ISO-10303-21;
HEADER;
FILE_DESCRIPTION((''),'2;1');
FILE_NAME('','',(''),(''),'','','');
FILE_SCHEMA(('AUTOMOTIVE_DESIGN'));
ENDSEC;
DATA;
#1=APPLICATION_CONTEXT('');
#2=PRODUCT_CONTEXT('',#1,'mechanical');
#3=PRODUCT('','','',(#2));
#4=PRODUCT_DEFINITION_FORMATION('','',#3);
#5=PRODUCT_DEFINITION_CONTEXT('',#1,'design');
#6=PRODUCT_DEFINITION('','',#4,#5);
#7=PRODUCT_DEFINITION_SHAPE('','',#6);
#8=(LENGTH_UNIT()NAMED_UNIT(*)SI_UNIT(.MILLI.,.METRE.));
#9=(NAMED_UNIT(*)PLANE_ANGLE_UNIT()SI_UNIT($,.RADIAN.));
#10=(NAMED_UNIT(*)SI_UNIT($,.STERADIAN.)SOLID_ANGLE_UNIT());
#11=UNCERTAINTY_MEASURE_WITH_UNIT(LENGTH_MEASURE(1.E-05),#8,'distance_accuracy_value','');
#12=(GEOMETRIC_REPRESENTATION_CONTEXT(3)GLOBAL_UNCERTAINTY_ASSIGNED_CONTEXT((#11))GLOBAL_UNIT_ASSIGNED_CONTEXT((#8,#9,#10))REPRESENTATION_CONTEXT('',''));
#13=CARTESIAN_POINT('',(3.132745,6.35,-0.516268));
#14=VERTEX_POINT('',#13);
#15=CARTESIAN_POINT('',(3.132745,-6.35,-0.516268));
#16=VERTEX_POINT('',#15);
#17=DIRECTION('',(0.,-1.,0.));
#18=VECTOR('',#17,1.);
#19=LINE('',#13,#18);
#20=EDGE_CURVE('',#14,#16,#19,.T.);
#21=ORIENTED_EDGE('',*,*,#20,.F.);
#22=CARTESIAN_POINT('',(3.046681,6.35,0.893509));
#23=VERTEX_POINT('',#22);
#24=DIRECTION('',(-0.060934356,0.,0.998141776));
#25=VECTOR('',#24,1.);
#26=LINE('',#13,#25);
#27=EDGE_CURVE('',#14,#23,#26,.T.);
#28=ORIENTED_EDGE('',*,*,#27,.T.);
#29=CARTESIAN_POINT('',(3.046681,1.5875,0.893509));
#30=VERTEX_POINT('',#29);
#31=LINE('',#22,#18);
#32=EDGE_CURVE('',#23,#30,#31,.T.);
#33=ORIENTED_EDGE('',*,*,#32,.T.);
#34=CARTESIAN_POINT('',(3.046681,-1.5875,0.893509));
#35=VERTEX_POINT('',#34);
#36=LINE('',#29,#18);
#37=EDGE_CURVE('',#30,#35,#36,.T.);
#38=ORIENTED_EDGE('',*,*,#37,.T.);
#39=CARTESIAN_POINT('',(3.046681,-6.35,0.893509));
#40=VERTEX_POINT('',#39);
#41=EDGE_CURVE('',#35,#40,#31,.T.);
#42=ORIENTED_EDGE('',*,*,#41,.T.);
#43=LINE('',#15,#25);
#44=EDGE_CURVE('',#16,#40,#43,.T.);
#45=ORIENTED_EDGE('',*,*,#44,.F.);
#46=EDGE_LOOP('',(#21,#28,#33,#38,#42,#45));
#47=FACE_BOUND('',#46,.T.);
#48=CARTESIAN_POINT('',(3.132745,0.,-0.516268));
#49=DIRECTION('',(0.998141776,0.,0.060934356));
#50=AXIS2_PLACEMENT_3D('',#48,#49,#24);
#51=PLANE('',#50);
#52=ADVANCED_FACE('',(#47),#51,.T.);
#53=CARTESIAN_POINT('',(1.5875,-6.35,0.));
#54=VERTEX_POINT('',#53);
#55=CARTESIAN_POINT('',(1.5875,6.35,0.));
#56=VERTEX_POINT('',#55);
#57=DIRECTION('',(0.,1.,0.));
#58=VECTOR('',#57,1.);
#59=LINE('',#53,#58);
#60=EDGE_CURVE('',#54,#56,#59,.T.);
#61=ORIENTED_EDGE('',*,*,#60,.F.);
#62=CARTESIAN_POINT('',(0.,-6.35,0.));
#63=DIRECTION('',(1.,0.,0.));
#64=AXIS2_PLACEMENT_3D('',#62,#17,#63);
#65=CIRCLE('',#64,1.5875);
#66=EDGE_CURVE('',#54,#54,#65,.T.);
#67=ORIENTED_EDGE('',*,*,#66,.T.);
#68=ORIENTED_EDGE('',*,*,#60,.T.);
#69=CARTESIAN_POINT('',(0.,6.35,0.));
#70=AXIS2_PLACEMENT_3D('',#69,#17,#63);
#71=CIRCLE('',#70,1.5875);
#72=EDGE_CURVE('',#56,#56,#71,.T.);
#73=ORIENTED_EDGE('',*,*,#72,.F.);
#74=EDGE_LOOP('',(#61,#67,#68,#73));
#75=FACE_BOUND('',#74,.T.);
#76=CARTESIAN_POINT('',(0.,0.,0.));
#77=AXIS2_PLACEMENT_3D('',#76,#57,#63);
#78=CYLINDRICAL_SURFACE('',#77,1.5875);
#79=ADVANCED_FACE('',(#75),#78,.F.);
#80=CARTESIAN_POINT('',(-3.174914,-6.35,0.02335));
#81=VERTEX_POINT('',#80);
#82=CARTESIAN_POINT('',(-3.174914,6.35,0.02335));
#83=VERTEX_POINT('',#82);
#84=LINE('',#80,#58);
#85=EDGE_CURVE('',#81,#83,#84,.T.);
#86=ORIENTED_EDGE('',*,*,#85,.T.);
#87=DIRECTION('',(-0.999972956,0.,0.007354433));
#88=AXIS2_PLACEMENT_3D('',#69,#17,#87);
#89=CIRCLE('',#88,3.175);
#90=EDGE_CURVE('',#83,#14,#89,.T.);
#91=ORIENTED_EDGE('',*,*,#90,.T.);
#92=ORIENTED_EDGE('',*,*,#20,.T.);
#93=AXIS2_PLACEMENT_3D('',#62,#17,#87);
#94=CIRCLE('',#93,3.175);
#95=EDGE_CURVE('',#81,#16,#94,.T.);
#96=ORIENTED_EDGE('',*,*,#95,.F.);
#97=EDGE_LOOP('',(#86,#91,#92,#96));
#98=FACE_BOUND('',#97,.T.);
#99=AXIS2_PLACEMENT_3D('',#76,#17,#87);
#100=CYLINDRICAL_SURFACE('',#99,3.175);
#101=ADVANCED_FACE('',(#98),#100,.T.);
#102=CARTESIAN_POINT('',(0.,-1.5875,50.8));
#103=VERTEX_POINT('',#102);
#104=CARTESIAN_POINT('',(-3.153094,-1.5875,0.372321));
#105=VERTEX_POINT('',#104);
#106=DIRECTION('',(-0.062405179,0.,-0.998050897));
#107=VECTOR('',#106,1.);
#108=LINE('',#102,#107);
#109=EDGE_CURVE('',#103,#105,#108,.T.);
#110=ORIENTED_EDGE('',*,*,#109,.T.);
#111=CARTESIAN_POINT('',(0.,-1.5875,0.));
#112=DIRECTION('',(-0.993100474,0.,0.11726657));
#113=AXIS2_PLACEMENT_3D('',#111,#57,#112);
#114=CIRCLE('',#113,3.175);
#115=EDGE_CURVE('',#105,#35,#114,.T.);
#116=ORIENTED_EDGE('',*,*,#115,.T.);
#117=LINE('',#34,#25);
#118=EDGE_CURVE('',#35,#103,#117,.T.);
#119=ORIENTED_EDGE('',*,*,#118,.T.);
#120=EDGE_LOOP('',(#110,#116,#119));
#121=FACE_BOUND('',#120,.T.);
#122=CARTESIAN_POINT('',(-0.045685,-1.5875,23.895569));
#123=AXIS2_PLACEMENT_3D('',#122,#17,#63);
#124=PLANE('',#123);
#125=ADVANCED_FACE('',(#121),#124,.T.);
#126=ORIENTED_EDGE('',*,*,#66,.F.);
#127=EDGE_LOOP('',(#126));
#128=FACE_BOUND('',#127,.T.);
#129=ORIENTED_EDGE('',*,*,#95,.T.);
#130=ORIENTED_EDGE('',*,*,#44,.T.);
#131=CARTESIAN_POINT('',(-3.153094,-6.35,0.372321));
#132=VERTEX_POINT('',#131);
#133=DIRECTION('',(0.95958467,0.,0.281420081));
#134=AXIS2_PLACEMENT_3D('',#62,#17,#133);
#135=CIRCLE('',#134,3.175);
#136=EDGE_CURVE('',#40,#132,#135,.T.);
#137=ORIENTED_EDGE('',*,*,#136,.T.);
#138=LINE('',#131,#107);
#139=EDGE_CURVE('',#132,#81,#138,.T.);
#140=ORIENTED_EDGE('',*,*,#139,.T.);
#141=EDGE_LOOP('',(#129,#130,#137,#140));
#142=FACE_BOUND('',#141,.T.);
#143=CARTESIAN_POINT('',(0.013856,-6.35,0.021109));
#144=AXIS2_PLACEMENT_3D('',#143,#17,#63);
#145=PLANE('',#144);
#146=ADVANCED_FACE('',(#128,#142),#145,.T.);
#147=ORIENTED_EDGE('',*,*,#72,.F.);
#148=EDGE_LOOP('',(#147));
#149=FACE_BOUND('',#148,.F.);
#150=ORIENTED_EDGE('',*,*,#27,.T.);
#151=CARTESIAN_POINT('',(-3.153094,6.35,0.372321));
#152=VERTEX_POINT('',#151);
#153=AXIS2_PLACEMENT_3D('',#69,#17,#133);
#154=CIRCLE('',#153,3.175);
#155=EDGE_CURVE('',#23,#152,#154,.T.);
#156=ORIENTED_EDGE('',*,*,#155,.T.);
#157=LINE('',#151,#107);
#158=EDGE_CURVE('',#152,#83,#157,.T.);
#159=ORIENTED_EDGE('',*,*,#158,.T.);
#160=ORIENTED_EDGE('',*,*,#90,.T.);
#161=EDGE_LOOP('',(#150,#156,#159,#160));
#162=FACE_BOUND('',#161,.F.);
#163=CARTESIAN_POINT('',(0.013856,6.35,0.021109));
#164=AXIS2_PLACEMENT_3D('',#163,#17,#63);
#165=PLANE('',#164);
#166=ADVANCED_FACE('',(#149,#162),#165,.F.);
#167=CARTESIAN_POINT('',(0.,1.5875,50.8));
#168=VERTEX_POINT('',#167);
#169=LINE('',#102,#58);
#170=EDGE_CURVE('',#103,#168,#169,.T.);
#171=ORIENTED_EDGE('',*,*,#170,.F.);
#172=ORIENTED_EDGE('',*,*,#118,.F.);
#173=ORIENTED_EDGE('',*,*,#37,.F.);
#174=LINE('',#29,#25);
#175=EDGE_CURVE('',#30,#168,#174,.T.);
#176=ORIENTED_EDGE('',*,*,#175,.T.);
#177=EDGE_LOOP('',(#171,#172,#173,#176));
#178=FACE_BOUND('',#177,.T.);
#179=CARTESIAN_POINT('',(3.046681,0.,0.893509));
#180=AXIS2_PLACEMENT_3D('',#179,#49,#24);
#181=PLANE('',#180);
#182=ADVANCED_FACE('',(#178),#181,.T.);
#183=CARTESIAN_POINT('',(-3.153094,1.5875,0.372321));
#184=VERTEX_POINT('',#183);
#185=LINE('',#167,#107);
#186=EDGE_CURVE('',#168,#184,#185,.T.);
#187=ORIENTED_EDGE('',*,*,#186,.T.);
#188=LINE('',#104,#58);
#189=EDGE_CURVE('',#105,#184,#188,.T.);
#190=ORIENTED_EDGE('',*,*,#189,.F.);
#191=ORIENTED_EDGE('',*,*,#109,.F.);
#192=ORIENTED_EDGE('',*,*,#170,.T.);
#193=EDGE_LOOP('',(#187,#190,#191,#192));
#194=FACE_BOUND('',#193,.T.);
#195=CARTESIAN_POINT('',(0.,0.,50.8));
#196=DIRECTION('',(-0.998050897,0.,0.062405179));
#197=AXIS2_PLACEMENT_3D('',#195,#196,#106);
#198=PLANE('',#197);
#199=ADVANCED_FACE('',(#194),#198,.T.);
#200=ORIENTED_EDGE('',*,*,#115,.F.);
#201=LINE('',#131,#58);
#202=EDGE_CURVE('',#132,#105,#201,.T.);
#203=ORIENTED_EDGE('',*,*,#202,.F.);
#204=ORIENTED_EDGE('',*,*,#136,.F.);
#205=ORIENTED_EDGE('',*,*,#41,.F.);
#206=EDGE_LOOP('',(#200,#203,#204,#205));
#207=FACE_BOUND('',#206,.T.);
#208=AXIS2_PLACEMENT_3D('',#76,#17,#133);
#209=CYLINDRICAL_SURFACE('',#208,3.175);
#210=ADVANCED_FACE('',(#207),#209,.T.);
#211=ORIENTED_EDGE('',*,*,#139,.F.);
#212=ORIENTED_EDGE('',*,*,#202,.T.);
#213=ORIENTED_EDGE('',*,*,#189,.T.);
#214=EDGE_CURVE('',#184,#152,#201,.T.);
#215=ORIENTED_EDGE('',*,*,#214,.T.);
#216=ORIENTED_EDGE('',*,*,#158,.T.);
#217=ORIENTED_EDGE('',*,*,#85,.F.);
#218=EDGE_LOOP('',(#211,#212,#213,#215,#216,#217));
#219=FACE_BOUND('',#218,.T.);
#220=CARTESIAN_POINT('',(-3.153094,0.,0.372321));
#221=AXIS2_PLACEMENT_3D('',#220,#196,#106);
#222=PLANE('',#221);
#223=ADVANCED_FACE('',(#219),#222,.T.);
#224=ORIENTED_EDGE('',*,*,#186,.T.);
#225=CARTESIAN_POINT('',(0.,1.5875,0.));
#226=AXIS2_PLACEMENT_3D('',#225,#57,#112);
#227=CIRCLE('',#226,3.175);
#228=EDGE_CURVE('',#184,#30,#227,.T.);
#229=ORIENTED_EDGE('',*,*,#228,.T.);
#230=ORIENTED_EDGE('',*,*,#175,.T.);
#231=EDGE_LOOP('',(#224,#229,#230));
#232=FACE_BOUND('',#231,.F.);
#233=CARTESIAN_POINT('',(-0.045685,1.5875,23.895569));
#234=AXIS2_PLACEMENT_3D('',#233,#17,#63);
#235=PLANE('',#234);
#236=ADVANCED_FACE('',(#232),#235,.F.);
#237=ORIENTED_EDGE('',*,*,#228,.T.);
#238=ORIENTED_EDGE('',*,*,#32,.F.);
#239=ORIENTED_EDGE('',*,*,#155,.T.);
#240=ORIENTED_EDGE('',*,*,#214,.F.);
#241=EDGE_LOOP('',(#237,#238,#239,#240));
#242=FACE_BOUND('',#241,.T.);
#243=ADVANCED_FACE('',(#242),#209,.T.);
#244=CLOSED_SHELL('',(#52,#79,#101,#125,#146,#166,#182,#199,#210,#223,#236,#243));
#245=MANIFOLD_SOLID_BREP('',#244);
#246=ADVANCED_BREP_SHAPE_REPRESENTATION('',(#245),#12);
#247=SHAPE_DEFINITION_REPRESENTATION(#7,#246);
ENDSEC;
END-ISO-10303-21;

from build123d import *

# Parameters (mm, degrees)
F0_R     = 1.5875
F1_DEPTH = 6.35
F2_DEPTH = 1.5875


with BuildPart() as f1:
    # F0 (on Front) → F1 (new body, symmetric)
    with BuildSketch(Plane.XZ):
        with BuildLine():
            ThreePointArc((-3.1749141346, 0.0233503235), (-0.2706319367, -3.1634448557), (3.1327451143, -0.5162683885))
            Line((3.1327451143, -0.5162683885), (3.0466813259, 0.8935087569))
            ThreePointArc((3.0466813259, 0.8935087569), (-0.2659699045, 3.1638402314), (-3.153094005, 0.3723213606))
            Line((-3.153094005, 0.3723213606), (-3.1749141346, 0.0233503235))
        make_face()
        Circle(F0_R, mode=Mode.SUBTRACT)
    extrude(amount=F1_DEPTH, both=True)

    # F0 (on Front) → F2 (join, symmetric)
    with BuildSketch(Plane.XZ):
        with BuildLine():
            ThreePointArc((-3.153094005, 0.3723213606), (-0.2659699045, 3.1638402314), (3.0466813259, 0.8935087569))
            Line((3.0466813259, 0.8935087569), (0, 50.8))
            Line((0, 50.8), (-3.153094005, 0.3723213606))
        make_face()
    extrude(amount=F2_DEPTH, both=True)


solid = f1.part
